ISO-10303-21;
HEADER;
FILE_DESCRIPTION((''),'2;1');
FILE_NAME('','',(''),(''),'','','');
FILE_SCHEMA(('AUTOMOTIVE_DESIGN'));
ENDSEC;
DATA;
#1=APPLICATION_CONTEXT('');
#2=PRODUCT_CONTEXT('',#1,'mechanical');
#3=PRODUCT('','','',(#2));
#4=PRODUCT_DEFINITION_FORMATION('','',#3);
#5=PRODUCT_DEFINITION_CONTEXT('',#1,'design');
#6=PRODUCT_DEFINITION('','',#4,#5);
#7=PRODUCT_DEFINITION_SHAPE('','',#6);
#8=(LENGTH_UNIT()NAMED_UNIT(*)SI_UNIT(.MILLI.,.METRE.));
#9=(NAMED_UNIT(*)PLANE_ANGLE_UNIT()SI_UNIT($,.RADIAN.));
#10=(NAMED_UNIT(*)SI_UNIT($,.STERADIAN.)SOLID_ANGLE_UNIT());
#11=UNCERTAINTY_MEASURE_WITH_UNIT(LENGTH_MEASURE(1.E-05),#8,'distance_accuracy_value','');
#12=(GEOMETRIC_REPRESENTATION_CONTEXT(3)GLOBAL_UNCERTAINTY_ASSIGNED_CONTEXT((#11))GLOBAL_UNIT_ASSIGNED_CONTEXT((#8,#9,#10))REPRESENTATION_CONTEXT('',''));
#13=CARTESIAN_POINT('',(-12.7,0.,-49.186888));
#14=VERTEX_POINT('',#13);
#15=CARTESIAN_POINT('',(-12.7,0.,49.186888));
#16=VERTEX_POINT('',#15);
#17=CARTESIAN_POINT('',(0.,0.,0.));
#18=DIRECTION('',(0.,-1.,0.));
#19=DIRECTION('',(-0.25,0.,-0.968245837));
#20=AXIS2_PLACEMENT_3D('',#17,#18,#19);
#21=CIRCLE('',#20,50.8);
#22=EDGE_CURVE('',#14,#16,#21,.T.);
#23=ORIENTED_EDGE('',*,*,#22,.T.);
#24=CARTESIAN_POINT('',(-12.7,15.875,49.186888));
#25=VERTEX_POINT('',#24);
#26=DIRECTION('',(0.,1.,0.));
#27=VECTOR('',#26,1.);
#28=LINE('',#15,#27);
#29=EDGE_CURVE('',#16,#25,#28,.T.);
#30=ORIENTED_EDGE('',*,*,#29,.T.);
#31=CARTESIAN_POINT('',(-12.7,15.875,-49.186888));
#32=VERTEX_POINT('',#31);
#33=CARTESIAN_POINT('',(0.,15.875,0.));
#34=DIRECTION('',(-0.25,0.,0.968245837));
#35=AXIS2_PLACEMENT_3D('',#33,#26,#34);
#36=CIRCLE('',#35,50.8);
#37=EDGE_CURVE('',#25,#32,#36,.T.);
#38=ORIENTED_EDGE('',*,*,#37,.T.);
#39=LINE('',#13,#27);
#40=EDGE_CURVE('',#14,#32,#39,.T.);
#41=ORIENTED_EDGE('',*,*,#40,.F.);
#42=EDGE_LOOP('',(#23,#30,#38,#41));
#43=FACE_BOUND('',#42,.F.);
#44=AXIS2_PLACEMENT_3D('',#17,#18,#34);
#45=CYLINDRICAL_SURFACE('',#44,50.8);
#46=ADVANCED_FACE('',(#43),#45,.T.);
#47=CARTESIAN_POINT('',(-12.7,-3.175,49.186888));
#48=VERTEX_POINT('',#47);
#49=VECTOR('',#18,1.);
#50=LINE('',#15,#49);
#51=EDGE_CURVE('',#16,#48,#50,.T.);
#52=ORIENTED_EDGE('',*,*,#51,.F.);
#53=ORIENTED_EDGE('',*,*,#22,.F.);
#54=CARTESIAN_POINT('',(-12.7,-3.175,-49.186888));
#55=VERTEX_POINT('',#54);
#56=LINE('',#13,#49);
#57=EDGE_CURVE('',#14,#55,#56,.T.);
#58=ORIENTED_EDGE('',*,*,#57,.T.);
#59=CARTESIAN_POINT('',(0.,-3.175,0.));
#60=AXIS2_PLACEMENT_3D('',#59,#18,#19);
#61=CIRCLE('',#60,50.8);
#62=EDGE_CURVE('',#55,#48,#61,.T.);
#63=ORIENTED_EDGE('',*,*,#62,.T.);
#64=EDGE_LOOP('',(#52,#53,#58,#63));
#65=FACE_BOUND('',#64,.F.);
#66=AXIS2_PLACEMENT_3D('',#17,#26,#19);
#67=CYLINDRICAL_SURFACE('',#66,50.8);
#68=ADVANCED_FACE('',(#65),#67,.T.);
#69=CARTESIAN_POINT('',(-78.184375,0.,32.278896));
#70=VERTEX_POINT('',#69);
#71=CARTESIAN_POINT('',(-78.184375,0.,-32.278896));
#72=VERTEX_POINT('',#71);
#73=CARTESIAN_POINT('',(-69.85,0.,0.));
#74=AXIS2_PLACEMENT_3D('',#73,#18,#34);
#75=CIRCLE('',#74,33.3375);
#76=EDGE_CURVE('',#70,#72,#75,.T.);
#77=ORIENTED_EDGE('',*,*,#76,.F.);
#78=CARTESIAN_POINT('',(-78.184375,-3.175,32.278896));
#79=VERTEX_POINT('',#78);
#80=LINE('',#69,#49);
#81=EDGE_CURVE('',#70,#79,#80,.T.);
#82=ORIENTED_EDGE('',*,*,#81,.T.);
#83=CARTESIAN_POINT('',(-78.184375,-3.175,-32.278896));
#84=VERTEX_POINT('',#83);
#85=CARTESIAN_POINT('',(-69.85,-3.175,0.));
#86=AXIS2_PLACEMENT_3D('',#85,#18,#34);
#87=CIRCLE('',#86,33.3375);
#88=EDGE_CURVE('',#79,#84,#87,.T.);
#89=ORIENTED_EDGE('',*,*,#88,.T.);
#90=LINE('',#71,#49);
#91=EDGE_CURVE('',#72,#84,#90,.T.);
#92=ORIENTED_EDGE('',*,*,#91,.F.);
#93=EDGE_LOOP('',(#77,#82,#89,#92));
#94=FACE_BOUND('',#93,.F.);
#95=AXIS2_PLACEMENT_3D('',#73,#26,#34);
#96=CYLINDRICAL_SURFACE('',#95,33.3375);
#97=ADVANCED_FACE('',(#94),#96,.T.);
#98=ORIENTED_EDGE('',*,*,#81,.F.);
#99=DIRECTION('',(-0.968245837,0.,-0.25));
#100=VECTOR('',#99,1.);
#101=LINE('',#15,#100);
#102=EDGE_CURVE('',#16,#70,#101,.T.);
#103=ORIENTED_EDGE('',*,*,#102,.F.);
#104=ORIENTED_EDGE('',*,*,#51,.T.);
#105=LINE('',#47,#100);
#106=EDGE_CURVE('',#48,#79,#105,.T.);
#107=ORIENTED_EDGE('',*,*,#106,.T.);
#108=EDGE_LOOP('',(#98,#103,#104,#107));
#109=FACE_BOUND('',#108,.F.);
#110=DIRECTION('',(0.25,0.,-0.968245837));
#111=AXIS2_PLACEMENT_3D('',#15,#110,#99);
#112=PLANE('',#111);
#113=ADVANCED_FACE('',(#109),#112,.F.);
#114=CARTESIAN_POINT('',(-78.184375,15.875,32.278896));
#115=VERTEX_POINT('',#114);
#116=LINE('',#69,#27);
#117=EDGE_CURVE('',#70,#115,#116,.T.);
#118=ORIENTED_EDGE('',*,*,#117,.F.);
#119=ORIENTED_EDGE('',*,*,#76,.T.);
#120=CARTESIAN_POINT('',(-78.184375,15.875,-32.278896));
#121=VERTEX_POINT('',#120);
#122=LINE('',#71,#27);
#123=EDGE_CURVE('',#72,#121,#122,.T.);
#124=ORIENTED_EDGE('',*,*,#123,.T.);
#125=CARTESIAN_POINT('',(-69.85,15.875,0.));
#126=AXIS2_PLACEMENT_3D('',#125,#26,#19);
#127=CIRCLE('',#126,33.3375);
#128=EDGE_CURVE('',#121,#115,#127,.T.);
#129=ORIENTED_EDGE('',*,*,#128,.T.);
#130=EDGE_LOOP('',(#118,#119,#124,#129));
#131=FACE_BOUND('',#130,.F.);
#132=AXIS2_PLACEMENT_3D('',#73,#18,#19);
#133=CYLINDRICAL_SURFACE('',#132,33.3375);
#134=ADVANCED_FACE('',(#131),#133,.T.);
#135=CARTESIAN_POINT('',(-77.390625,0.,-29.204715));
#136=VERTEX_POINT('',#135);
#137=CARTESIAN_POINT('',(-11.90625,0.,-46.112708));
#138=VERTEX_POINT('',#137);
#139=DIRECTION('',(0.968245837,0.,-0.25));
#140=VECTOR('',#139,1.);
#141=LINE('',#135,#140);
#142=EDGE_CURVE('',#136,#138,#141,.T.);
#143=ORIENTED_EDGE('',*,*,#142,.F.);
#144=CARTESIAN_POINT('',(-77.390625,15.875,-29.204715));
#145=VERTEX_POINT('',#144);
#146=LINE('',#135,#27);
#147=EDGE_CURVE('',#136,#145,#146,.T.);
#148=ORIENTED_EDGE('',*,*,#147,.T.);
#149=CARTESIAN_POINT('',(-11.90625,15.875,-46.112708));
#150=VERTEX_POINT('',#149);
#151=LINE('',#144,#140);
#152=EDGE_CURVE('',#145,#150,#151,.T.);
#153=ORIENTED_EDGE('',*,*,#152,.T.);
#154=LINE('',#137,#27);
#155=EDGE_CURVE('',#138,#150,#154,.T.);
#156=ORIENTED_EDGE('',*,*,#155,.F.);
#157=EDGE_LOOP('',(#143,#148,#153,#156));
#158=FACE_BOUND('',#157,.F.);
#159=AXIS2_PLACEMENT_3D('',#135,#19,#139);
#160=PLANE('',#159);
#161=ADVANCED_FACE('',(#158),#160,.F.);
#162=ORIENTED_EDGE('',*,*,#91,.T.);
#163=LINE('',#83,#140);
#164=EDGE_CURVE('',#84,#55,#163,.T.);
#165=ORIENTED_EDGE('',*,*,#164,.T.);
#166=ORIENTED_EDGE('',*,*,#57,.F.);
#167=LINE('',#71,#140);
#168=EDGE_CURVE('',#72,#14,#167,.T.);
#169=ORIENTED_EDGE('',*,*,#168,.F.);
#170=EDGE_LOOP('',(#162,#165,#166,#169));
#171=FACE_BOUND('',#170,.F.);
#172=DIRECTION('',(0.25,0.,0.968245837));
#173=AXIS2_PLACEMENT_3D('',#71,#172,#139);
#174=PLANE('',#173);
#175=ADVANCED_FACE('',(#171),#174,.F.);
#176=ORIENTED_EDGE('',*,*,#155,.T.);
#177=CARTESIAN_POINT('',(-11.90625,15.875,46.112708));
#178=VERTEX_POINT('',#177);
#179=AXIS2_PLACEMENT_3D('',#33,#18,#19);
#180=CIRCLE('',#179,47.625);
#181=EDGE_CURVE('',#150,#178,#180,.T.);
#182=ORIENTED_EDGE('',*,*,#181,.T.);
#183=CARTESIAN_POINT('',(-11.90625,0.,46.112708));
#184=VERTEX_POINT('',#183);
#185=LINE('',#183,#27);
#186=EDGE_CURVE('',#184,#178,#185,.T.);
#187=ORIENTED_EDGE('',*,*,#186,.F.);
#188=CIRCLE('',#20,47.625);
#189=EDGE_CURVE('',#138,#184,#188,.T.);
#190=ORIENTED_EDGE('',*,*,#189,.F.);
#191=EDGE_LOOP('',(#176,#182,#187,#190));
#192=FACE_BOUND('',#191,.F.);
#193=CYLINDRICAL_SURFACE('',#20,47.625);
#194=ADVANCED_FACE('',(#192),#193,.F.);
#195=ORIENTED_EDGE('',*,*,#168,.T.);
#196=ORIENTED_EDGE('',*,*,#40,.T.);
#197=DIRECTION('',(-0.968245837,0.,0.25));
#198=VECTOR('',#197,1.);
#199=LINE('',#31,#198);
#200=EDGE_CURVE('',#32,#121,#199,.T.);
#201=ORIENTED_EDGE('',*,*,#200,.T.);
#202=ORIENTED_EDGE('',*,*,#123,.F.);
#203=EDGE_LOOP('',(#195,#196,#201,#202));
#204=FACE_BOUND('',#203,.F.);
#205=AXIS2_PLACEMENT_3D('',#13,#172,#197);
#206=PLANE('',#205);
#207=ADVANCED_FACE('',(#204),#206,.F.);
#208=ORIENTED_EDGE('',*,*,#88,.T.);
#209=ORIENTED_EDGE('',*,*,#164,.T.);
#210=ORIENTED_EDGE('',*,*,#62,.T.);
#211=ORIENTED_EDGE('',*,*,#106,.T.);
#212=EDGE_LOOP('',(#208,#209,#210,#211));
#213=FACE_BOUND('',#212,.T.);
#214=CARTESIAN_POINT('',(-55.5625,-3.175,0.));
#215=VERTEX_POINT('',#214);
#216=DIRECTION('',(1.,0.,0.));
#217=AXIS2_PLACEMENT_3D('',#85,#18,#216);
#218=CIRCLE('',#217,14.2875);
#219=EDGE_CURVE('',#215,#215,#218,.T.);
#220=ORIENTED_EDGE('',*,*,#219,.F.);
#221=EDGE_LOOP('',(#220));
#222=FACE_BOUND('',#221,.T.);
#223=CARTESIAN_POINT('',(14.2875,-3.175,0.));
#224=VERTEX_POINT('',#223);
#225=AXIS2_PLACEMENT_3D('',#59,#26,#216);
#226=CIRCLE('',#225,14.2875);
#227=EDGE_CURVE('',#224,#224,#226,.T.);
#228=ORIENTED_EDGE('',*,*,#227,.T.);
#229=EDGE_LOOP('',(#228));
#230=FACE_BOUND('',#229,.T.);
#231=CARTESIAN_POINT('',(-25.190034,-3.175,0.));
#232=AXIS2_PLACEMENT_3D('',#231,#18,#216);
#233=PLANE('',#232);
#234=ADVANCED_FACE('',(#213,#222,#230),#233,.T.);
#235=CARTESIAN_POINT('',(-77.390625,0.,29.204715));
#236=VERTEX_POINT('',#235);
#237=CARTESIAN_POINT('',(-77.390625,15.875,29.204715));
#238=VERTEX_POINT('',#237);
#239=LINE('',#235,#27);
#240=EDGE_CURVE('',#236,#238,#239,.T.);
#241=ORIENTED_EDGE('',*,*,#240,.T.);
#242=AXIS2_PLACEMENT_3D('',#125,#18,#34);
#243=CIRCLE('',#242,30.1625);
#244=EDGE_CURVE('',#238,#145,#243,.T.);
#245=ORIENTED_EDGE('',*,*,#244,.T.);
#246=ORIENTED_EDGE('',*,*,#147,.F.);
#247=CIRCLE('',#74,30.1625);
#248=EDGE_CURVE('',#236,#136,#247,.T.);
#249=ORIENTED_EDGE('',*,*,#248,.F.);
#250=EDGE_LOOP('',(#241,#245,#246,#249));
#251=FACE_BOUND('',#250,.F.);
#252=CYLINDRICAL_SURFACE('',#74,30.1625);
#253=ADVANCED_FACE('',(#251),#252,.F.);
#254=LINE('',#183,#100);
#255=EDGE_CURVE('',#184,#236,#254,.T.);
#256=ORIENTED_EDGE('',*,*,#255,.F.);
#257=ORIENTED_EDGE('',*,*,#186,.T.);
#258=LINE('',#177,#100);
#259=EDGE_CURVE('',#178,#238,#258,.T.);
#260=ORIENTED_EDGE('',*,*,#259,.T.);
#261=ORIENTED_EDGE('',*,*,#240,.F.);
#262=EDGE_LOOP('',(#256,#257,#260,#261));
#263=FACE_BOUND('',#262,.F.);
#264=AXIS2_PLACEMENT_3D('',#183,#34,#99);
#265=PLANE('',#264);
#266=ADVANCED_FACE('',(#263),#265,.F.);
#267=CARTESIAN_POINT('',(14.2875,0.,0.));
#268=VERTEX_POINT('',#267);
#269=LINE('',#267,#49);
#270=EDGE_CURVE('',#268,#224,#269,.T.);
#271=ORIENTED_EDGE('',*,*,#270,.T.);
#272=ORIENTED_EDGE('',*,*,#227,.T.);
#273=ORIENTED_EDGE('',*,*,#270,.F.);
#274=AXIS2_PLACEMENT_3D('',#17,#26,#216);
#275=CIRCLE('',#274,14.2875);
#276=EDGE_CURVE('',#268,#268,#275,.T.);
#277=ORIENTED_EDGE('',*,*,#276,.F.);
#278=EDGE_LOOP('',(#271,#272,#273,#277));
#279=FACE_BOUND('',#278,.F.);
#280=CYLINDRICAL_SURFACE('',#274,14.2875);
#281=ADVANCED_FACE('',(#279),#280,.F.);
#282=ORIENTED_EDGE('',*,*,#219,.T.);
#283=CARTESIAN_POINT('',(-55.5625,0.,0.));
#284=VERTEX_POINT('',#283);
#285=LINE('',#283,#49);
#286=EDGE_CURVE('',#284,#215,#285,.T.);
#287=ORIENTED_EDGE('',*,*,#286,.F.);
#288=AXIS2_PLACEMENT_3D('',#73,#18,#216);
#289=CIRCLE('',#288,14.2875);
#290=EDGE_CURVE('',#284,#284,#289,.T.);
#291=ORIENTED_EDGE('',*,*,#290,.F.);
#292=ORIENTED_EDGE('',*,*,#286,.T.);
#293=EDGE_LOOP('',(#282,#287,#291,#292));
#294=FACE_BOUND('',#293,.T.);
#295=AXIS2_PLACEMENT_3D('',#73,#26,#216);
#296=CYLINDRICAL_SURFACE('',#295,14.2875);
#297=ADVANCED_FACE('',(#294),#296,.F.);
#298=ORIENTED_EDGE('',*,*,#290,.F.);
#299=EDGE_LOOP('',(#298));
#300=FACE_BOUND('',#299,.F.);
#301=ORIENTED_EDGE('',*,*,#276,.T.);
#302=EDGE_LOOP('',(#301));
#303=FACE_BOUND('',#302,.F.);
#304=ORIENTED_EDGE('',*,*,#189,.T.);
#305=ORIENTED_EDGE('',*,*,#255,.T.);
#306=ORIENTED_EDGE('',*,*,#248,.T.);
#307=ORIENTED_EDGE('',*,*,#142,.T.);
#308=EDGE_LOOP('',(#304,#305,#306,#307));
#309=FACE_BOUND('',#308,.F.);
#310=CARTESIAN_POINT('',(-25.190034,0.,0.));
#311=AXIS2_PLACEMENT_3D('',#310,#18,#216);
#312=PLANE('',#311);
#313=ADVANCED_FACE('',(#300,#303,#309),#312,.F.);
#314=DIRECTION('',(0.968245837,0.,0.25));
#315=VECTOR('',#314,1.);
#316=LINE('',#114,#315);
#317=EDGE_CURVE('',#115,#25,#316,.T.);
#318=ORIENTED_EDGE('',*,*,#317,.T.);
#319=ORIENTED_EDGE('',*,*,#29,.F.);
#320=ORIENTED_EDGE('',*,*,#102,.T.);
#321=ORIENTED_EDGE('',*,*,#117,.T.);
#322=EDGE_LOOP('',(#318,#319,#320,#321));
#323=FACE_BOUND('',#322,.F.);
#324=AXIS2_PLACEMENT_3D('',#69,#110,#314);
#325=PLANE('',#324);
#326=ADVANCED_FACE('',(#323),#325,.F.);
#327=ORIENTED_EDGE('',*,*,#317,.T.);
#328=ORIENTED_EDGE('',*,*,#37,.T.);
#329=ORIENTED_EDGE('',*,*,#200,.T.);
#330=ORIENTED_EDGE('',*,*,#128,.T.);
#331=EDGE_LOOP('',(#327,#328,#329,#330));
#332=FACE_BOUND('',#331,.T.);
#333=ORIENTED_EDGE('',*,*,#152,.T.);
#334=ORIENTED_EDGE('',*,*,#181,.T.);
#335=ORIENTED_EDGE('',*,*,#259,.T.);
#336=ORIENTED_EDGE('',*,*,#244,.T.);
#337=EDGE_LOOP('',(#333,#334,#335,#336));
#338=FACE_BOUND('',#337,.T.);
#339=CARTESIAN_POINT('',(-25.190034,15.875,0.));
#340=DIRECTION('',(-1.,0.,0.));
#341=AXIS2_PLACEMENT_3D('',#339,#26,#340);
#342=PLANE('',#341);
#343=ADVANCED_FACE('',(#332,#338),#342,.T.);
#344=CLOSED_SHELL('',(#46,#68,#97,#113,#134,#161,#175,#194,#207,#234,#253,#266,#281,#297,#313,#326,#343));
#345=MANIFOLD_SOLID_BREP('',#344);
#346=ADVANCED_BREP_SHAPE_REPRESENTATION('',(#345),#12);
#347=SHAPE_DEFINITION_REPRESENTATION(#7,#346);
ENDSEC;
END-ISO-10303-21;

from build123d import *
from build123d import SkipClean  # not in build123d's __all__

# Parameters (mm, degrees)
F0_R     = 14.2875
F1_DEPTH = 3.175
F3_DEPTH = 15.875


with BuildPart() as f1:
    # F0 (on Front) → F1 (new body)
    with BuildSketch(Plane.XZ):
        with BuildLine():
            Line((-78.184375, -32.278895576), (-12.7, -49.1868884968))
            ThreePointArc((-12.7, -49.1868884968), (50.8, 0), (-12.7, 49.1868884968))
            Line((-12.7, 49.1868884968), (-78.184375, 32.278895576))
            ThreePointArc((-78.184375, 32.278895576), (-103.1875, 0), (-78.184375, -32.278895576))
        make_face()
        with Locations((-69.85, 0)):
            Circle(F0_R, mode=Mode.SUBTRACT)
        with BuildLine():
            ThreePointArc((-14.2875, 0), (0, 14.2875), (14.2875, 0))
            ThreePointArc((14.2875, 0), (0, -14.2875), (-14.2875, 0))
        make_face(mode=Mode.SUBTRACT)
    extrude(amount=F1_DEPTH)

    # F2 (on face) → F3 (join)
    with BuildSketch(Plane(origin=(0, 0, 0), x_dir=(-1, 0, 0), z_dir=(0, 1, 0))):
        with BuildLine():
            ThreePointArc((78.184375, -32.278895576), (103.1875, 0), (78.184375, 32.278895576))
            Line((78.184375, 32.278895576), (12.7, 49.1868884968))
            ThreePointArc((12.7, 49.1868884968), (-50.8, 0), (12.7, -49.1868884968))
            Line((12.7, -49.1868884968), (78.184375, -32.278895576))
        make_face()
        with BuildLine():
            Line((11.90625, 46.1127079658), (77.390625, 29.204715045))
            ThreePointArc((77.390625, 29.204715045), (100.0125, 0), (77.390625, -29.204715045))
            Line((77.390625, -29.204715045), (11.90625, -46.1127079658))
            ThreePointArc((11.90625, -46.1127079658), (-47.625, 0), (11.90625, 46.1127079658))
        make_face(mode=Mode.SUBTRACT)
    with SkipClean():  # cleaning this boolean's faces spoils the solid; the shape is the same uncleaned
        extrude(amount=F3_DEPTH)


solid = f1.part
